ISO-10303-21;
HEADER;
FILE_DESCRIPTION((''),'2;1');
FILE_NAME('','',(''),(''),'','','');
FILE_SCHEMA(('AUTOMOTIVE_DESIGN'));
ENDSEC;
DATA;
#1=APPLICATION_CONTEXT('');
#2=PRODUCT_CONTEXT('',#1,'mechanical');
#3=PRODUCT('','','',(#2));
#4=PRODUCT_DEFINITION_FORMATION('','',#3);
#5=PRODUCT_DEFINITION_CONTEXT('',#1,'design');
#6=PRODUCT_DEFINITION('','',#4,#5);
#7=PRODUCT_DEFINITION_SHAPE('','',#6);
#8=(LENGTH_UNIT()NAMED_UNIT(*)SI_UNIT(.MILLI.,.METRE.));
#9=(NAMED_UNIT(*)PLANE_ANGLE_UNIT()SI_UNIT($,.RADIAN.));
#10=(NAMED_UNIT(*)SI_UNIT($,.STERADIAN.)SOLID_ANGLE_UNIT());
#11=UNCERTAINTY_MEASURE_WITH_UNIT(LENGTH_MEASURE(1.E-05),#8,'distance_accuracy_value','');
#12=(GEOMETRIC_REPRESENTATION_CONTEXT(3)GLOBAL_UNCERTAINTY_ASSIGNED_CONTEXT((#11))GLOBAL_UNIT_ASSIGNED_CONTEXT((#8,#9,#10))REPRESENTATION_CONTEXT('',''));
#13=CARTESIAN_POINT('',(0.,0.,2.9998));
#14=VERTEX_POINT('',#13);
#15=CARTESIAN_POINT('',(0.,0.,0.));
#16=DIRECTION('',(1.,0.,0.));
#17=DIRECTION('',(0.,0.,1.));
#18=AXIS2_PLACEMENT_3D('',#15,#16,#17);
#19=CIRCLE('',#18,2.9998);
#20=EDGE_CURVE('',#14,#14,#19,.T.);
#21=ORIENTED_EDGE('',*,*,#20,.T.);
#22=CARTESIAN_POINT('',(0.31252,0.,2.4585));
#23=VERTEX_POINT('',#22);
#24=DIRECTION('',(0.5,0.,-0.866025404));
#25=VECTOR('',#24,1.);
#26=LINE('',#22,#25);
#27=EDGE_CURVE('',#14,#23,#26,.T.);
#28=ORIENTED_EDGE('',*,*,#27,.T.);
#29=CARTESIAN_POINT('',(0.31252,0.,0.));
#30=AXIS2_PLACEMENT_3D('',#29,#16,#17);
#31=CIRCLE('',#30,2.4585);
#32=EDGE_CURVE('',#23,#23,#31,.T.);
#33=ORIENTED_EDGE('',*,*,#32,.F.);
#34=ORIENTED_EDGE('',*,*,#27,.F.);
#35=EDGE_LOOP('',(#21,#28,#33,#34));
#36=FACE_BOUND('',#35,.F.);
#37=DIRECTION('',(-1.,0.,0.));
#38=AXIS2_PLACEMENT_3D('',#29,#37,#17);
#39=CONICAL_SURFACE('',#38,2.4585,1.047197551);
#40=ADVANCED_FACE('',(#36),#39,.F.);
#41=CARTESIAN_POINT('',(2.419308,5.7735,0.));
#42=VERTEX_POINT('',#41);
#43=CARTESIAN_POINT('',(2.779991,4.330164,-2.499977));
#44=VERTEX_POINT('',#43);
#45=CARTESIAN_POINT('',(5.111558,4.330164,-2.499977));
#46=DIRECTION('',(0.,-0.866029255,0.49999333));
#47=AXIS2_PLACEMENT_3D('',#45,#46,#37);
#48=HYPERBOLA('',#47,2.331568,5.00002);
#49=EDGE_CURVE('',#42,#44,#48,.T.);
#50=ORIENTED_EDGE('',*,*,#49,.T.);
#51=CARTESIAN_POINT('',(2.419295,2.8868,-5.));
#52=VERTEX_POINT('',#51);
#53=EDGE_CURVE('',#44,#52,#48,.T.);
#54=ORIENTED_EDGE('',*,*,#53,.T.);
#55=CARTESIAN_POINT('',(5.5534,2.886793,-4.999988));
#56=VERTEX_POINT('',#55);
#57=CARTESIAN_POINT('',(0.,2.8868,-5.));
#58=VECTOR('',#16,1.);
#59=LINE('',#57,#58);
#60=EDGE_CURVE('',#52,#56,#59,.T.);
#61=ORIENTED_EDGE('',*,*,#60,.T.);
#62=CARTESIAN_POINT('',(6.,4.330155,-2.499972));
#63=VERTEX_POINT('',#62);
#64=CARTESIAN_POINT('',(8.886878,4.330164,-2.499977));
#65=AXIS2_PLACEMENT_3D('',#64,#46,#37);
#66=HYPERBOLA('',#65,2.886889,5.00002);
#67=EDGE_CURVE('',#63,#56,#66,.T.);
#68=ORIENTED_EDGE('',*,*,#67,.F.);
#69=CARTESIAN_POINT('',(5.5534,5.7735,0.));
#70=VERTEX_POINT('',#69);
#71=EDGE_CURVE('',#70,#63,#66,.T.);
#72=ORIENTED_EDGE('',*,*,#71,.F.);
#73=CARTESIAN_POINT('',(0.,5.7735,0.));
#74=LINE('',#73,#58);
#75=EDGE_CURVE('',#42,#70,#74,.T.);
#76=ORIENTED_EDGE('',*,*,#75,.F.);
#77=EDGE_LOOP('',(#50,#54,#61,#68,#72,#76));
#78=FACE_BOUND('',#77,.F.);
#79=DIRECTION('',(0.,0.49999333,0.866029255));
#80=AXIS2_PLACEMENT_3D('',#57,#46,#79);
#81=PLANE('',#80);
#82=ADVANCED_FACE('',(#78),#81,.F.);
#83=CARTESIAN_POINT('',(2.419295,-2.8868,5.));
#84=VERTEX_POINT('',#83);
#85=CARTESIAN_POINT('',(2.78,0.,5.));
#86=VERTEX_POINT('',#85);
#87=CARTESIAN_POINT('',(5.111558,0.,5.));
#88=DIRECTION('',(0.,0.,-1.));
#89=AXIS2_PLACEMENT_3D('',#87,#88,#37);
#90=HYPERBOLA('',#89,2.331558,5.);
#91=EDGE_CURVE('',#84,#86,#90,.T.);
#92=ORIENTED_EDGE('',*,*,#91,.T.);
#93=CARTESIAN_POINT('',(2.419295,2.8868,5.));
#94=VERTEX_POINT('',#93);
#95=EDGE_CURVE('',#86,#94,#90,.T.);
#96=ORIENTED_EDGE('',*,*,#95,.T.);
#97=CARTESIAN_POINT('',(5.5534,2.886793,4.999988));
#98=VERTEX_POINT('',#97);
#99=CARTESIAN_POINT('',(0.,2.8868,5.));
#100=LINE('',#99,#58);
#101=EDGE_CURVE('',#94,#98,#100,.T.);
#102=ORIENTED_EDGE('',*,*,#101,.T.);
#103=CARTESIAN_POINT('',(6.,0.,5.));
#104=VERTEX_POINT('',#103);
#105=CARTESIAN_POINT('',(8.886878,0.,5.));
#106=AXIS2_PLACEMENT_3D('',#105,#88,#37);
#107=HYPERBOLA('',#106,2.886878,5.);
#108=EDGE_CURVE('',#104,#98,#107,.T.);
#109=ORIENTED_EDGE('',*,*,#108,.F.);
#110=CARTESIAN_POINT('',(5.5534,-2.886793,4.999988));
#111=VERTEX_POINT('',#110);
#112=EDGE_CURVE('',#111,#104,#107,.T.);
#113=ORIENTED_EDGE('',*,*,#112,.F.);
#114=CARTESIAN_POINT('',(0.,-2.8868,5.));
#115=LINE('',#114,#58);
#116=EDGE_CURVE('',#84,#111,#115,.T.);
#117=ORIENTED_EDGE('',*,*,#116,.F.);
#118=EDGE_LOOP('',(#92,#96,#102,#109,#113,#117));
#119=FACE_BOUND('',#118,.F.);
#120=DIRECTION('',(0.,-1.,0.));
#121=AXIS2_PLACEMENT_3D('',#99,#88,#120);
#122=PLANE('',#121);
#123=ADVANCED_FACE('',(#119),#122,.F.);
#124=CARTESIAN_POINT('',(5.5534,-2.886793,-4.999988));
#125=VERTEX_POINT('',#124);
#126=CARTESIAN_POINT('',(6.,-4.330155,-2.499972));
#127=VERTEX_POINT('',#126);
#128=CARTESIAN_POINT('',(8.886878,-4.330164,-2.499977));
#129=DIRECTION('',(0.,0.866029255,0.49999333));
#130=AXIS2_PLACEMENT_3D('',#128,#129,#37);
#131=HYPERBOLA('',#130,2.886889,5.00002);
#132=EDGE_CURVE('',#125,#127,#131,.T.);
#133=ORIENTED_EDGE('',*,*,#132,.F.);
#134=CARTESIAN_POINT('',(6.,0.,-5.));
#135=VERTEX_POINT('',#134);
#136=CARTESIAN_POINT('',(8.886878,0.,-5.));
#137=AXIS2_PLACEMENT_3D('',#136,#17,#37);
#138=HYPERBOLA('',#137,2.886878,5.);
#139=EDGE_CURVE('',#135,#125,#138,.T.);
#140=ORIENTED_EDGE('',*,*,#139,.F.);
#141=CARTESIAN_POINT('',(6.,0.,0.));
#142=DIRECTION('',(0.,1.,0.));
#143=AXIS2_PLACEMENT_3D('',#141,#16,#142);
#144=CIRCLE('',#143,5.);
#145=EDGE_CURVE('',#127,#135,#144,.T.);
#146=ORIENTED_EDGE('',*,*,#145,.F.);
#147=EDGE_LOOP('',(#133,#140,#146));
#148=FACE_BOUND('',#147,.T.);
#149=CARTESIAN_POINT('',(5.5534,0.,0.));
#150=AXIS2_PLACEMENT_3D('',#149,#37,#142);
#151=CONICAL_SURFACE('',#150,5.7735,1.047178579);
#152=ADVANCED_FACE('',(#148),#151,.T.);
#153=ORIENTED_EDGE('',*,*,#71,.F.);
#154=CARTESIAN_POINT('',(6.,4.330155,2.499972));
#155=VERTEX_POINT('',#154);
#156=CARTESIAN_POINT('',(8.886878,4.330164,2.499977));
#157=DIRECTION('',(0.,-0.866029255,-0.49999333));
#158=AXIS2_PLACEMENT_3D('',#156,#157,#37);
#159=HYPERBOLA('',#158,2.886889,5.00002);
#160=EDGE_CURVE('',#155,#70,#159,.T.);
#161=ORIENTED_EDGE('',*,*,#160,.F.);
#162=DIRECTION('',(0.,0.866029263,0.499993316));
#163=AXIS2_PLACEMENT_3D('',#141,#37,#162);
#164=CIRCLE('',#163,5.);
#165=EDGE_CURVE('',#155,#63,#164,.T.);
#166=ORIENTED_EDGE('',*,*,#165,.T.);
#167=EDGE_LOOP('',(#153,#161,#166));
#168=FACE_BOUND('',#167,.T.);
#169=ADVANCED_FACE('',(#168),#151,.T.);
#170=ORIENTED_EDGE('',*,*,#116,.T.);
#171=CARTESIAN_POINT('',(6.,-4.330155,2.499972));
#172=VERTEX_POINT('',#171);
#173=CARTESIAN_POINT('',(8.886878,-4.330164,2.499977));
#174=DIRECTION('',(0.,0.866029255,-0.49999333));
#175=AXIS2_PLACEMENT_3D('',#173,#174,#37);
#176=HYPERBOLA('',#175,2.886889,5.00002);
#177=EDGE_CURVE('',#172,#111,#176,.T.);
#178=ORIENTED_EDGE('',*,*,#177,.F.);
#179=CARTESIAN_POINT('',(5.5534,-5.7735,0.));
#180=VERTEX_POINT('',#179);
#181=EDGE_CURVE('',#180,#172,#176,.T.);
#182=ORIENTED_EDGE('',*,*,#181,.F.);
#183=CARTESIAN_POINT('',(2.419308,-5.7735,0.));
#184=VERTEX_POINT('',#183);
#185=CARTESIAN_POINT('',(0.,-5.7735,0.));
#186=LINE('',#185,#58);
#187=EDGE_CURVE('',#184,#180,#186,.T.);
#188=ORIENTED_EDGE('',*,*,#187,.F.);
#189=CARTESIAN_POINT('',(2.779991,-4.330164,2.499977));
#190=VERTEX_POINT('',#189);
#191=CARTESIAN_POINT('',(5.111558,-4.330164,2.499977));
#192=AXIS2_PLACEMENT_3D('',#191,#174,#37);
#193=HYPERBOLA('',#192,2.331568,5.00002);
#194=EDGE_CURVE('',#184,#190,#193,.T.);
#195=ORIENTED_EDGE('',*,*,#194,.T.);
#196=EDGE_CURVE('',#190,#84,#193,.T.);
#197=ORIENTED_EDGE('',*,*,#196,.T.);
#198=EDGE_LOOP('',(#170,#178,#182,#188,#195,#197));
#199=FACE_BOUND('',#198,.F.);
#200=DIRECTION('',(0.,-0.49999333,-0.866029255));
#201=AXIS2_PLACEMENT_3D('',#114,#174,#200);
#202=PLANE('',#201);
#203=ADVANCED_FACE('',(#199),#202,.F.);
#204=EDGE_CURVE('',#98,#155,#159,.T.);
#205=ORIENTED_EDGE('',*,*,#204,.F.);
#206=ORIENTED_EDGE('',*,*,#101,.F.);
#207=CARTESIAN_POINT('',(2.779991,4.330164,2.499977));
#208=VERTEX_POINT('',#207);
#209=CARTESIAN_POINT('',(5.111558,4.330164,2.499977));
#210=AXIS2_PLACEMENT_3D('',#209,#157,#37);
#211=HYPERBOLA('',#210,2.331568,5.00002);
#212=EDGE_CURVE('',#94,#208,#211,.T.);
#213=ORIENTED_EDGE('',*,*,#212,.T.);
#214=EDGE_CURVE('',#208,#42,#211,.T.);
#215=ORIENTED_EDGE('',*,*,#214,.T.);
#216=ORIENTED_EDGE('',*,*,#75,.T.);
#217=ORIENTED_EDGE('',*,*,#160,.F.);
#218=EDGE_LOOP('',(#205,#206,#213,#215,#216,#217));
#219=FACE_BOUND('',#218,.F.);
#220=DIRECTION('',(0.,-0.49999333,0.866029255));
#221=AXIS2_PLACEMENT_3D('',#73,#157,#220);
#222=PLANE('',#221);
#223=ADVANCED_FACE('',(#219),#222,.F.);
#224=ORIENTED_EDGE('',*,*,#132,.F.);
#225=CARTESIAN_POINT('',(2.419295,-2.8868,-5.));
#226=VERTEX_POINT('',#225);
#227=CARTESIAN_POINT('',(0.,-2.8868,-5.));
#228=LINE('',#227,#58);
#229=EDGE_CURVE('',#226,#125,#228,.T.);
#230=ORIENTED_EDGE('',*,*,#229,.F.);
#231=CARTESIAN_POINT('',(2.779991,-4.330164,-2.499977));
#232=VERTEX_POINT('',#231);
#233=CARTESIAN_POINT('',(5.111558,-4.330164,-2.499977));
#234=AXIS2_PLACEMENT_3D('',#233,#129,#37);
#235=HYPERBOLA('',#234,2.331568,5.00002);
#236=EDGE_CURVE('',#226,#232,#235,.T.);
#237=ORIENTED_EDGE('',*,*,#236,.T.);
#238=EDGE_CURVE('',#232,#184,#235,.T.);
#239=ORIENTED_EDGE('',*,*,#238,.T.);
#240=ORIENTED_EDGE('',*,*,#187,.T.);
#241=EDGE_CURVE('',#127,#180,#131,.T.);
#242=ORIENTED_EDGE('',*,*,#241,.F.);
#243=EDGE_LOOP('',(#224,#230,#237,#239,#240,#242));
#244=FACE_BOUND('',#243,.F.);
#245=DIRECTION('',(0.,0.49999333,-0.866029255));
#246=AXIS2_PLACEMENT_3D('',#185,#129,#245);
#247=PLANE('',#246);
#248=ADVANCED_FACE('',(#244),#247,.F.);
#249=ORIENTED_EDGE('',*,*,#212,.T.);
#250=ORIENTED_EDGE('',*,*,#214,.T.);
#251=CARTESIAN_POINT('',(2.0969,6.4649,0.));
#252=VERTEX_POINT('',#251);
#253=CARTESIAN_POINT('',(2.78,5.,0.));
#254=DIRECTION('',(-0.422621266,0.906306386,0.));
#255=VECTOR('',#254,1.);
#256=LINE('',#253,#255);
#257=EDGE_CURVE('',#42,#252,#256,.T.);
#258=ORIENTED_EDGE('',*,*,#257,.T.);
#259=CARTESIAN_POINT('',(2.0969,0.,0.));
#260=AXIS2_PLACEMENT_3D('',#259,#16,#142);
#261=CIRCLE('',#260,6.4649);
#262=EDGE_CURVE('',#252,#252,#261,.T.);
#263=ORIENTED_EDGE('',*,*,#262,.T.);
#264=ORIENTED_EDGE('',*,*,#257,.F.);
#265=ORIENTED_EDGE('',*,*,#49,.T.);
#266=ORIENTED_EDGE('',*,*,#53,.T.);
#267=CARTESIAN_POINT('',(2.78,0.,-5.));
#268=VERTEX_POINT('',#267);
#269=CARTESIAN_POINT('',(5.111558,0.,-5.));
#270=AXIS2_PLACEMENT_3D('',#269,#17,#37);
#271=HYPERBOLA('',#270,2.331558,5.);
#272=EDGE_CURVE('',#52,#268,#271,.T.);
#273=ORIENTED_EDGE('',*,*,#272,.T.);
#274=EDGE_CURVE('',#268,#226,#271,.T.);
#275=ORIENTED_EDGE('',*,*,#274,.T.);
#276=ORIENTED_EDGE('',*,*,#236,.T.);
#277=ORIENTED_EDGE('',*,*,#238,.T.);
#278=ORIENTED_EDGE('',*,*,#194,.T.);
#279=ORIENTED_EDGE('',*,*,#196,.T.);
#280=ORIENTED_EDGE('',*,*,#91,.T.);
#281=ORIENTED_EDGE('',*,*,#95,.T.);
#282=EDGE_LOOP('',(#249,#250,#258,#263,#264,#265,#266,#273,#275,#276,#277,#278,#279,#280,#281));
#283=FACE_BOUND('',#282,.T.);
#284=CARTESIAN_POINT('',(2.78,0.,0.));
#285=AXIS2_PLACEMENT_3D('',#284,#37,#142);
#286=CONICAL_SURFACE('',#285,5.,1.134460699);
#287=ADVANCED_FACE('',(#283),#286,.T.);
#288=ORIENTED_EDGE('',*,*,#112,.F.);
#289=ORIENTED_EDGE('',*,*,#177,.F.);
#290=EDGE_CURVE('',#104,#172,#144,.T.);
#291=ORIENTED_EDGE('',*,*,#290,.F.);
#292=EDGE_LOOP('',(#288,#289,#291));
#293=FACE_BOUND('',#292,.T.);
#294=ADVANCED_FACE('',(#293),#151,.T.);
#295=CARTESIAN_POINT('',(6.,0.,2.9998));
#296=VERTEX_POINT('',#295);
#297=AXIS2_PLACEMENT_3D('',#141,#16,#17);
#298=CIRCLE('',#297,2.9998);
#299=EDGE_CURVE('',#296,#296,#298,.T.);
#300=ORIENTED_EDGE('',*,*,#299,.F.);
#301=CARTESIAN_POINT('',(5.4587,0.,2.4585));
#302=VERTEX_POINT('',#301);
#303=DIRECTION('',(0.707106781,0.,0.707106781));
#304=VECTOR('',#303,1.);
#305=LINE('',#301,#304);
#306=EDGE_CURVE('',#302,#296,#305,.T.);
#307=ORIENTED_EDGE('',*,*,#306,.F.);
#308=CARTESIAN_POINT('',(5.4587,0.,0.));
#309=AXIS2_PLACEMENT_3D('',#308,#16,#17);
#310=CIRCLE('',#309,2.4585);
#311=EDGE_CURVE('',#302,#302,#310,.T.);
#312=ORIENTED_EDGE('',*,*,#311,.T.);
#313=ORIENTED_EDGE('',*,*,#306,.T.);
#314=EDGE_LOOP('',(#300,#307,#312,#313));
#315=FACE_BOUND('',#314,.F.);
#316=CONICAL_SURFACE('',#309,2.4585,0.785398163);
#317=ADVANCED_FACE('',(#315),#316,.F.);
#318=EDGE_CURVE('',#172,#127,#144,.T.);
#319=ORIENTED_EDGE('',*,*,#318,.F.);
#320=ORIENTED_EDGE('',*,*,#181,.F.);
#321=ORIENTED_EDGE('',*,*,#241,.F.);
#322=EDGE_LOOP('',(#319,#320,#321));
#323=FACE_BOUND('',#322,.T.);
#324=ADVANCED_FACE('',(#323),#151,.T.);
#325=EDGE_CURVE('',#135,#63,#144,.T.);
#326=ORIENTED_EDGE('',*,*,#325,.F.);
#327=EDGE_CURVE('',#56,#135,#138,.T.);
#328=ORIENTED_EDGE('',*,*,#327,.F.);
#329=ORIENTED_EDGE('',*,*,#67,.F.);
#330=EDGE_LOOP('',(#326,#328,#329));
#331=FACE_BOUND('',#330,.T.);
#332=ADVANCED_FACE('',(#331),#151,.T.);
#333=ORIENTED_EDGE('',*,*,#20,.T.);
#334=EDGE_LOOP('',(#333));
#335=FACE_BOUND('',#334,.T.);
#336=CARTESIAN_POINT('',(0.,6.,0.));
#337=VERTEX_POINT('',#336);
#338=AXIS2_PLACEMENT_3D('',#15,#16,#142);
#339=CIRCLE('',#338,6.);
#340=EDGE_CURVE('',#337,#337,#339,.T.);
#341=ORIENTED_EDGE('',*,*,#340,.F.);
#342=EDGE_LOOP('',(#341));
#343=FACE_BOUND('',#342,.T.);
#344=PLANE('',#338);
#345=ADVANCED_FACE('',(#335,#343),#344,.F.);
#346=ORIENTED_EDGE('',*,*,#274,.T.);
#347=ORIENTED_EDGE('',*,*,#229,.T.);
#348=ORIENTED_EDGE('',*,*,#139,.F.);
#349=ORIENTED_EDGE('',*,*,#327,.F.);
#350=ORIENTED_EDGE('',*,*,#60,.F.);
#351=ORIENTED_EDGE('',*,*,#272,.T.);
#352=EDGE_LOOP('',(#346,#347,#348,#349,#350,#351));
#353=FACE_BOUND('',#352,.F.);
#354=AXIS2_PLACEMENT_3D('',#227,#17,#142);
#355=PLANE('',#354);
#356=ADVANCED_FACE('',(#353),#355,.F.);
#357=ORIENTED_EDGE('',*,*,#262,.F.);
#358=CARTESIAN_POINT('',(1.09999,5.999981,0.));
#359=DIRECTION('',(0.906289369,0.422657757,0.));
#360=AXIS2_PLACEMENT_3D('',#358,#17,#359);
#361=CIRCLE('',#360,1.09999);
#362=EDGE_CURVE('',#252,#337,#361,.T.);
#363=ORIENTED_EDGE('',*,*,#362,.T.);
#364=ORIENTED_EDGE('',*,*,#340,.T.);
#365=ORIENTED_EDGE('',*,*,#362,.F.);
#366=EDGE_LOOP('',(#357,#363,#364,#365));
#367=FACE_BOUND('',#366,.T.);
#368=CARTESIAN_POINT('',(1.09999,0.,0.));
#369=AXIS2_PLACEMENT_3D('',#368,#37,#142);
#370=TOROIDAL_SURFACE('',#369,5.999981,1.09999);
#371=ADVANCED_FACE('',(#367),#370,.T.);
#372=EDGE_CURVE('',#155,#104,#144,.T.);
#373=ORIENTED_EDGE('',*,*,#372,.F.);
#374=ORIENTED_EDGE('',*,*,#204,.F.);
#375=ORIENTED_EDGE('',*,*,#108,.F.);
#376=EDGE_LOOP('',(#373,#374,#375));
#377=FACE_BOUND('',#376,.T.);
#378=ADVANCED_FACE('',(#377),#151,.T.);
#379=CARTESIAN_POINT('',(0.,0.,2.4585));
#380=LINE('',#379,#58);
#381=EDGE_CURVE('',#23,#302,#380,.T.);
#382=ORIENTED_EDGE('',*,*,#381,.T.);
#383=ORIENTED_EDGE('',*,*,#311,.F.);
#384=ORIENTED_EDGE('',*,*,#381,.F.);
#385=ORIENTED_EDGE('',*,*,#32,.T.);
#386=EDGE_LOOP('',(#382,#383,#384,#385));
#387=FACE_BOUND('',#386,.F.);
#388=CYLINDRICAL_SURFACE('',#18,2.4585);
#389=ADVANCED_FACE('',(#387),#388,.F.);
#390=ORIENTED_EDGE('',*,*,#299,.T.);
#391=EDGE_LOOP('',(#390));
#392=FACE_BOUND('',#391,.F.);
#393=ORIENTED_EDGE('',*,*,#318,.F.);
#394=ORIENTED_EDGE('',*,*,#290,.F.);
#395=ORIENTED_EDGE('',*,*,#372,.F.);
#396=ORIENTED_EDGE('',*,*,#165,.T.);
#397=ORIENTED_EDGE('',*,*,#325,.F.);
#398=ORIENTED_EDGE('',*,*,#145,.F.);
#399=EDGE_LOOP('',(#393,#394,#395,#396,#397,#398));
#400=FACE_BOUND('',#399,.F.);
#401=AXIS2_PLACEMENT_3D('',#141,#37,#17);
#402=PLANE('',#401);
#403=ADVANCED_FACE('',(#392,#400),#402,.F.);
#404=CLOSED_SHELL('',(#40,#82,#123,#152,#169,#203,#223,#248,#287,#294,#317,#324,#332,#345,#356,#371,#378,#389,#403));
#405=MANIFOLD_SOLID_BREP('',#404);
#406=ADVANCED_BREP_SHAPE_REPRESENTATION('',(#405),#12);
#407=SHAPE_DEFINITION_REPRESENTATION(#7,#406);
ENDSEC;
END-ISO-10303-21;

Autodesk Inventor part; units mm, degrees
ref_plane "YZ Plane" through (0, 0, 0) normal (1, 0, 0) x (0, 1, 0)
ref_plane "XZ Plane" through (0, 0, 0) normal (0, 1, 0) x (-1, 0, 0)
sketch "Sketch1" plane through (0, 0, 0) normal (0, 0, 1) x (1, 0, 0)
  line L0 (-1.4239, 0) -> (7.2373, 0) projected
  line L1 (2.78, 5) -> (2.0969, 6.4649)
  line L2 (2.78, 5) -> (6, 5) construction
  line L3 (6, 5) -> (6, 0) construction
  arc A0 (2.0969, 6.4649) -> (0, 6) centre (1.1, 6) ccw
  line L4 (2.78, 5) -> (2.78, 0)
  line L5 (0, -1.4613) -> (0, 8.7676) projected
  point P0 (0, 0)
  dimension "d2" = 10
  dimension "d4" = 14.2
  dimension "d5" = 1.1
  dimension "d15" = 6
  dimension "d16" = 25
revolve "Ring" add sketch "Sketch1" angle 360 about axis through (-10, 0, 0) along (1, 0, 0)
sketch "Sketch2" plane through (0, 0, 0) normal (-1, 0, 0) x (0, 0, 1)
  circle A0 centre (0, 0) radius 4.9
  line L0 (-5, -2.8868) -> (-5, 2.8868)
  line L1 (-5, 2.8868) -> (0, 5.7735)
  line L2 (0, 5.7735) -> (5, 2.8868)
  line L3 (5, 2.8868) -> (5, -2.8868)
  line L4 (5, -2.8868) -> (0, -5.7735)
  line L5 (0, -5.7735) -> (-5, -2.8868)
  circle A1 centre (0, 0) radius 6 projected
  dimension "d6" = 11.547
extrude "Body" add sketch "Sketch2" against normal blind 6 contours A0 | L0 L1 L2 L3 L4 L5
sketch "Sketch3" plane through (0, 0, 0) normal (0, 0, 1) x (1, 0, 0)
  line L0 (2.4193, 5.7735) -> (6, 5.7735) projected
  line L1 (6, 2.8868) -> (6, 5.7735) projected
  line L2 (0, -6) -> (0, 6) projected
  line L3 (-1.2, 0) -> (7.2, 0) projected
  line L4 (5.5534, 5.7735) -> (6, 5)
  dimension "d10" = 30
  dimension "d11" = 10
revolve "Chamfer1" cut sketch "Sketch3" angle 360 about axis through (-10, 0, 0) along (1, 0, 0)
sketch "Sketch4" plane through (0, 0, 0) normal (-1, 0, 0) x (0, 0, 1)
  circle A0 centre (0, 0) radius 6 projected
hole "Thread" at (0, 0, 0) direction (1, 0, 0) diameter 4.917 end through all thread size "M6x1" class "6H" standard "ISO Metric profile"
chamfer "Chamfer2" distance 0.5413 angle 30 1 edges at (0, 0, -2.4585) measured on face at (0, 4.7554, -0.5774)
ref_plane "Work Plane1" through (20.959, 0, 0) normal (0, 0, -1) x (-1, 0, 0)
chamfer "Chamfer3" distance 0.5413 angle 45 1 edges at (6, 0, -2.4585)
equation "\"d2\" = SW"
equation "\"d4\" = LADI"
equation "\"d5\" = PHH"
equation "\"d15\" = KOH"
equation "\"d16\" = KEWI"
equation "\"d6\" = 1.1547 * SW"
equation "\"d7\" = KOH"
equation "\"d10\" = ANG1"
equation "\"d11\" = SW0"
equation "\"d12\" = -0.5 * GD1 + 0.5 * NND"
equation "\"d46\" = -0.5 * GD1 + 0.5 * NND"
equation "\"d51\" = -0.5 * GD1 + 0.5 * NND"
equation "\"ANG1\" = 30deg"
equation "\"KEWI\" = 25deg"
equation "\"NND\" = 6"
equation "\"LADI\" = 14.2"
equation "\"SW\" = 10"
equation "\"PHH\" = 1.1"
equation "\"KOH\" = NND"
equation "\"SW0\" = 10"
equation "\"d1\" = LADI"
equation "\"d3\" = PHH"
equation "\"GUL\" = 0.541266 * PTC"
equation "\"RR\" = PHH"
equation "\"THREADDIA\" = 6"
equation "\"TOA\" = 30deg"
equation "\"PTC\" = 1"
equation "\"GAL\" = 0.541266 * PTC"
equation "\"E0\" = 1.155 * SW"
equation "\"GD1\" = 4.917468"
properties part number "ISO 4161 - M6(1)" material "Stainless Steel"
